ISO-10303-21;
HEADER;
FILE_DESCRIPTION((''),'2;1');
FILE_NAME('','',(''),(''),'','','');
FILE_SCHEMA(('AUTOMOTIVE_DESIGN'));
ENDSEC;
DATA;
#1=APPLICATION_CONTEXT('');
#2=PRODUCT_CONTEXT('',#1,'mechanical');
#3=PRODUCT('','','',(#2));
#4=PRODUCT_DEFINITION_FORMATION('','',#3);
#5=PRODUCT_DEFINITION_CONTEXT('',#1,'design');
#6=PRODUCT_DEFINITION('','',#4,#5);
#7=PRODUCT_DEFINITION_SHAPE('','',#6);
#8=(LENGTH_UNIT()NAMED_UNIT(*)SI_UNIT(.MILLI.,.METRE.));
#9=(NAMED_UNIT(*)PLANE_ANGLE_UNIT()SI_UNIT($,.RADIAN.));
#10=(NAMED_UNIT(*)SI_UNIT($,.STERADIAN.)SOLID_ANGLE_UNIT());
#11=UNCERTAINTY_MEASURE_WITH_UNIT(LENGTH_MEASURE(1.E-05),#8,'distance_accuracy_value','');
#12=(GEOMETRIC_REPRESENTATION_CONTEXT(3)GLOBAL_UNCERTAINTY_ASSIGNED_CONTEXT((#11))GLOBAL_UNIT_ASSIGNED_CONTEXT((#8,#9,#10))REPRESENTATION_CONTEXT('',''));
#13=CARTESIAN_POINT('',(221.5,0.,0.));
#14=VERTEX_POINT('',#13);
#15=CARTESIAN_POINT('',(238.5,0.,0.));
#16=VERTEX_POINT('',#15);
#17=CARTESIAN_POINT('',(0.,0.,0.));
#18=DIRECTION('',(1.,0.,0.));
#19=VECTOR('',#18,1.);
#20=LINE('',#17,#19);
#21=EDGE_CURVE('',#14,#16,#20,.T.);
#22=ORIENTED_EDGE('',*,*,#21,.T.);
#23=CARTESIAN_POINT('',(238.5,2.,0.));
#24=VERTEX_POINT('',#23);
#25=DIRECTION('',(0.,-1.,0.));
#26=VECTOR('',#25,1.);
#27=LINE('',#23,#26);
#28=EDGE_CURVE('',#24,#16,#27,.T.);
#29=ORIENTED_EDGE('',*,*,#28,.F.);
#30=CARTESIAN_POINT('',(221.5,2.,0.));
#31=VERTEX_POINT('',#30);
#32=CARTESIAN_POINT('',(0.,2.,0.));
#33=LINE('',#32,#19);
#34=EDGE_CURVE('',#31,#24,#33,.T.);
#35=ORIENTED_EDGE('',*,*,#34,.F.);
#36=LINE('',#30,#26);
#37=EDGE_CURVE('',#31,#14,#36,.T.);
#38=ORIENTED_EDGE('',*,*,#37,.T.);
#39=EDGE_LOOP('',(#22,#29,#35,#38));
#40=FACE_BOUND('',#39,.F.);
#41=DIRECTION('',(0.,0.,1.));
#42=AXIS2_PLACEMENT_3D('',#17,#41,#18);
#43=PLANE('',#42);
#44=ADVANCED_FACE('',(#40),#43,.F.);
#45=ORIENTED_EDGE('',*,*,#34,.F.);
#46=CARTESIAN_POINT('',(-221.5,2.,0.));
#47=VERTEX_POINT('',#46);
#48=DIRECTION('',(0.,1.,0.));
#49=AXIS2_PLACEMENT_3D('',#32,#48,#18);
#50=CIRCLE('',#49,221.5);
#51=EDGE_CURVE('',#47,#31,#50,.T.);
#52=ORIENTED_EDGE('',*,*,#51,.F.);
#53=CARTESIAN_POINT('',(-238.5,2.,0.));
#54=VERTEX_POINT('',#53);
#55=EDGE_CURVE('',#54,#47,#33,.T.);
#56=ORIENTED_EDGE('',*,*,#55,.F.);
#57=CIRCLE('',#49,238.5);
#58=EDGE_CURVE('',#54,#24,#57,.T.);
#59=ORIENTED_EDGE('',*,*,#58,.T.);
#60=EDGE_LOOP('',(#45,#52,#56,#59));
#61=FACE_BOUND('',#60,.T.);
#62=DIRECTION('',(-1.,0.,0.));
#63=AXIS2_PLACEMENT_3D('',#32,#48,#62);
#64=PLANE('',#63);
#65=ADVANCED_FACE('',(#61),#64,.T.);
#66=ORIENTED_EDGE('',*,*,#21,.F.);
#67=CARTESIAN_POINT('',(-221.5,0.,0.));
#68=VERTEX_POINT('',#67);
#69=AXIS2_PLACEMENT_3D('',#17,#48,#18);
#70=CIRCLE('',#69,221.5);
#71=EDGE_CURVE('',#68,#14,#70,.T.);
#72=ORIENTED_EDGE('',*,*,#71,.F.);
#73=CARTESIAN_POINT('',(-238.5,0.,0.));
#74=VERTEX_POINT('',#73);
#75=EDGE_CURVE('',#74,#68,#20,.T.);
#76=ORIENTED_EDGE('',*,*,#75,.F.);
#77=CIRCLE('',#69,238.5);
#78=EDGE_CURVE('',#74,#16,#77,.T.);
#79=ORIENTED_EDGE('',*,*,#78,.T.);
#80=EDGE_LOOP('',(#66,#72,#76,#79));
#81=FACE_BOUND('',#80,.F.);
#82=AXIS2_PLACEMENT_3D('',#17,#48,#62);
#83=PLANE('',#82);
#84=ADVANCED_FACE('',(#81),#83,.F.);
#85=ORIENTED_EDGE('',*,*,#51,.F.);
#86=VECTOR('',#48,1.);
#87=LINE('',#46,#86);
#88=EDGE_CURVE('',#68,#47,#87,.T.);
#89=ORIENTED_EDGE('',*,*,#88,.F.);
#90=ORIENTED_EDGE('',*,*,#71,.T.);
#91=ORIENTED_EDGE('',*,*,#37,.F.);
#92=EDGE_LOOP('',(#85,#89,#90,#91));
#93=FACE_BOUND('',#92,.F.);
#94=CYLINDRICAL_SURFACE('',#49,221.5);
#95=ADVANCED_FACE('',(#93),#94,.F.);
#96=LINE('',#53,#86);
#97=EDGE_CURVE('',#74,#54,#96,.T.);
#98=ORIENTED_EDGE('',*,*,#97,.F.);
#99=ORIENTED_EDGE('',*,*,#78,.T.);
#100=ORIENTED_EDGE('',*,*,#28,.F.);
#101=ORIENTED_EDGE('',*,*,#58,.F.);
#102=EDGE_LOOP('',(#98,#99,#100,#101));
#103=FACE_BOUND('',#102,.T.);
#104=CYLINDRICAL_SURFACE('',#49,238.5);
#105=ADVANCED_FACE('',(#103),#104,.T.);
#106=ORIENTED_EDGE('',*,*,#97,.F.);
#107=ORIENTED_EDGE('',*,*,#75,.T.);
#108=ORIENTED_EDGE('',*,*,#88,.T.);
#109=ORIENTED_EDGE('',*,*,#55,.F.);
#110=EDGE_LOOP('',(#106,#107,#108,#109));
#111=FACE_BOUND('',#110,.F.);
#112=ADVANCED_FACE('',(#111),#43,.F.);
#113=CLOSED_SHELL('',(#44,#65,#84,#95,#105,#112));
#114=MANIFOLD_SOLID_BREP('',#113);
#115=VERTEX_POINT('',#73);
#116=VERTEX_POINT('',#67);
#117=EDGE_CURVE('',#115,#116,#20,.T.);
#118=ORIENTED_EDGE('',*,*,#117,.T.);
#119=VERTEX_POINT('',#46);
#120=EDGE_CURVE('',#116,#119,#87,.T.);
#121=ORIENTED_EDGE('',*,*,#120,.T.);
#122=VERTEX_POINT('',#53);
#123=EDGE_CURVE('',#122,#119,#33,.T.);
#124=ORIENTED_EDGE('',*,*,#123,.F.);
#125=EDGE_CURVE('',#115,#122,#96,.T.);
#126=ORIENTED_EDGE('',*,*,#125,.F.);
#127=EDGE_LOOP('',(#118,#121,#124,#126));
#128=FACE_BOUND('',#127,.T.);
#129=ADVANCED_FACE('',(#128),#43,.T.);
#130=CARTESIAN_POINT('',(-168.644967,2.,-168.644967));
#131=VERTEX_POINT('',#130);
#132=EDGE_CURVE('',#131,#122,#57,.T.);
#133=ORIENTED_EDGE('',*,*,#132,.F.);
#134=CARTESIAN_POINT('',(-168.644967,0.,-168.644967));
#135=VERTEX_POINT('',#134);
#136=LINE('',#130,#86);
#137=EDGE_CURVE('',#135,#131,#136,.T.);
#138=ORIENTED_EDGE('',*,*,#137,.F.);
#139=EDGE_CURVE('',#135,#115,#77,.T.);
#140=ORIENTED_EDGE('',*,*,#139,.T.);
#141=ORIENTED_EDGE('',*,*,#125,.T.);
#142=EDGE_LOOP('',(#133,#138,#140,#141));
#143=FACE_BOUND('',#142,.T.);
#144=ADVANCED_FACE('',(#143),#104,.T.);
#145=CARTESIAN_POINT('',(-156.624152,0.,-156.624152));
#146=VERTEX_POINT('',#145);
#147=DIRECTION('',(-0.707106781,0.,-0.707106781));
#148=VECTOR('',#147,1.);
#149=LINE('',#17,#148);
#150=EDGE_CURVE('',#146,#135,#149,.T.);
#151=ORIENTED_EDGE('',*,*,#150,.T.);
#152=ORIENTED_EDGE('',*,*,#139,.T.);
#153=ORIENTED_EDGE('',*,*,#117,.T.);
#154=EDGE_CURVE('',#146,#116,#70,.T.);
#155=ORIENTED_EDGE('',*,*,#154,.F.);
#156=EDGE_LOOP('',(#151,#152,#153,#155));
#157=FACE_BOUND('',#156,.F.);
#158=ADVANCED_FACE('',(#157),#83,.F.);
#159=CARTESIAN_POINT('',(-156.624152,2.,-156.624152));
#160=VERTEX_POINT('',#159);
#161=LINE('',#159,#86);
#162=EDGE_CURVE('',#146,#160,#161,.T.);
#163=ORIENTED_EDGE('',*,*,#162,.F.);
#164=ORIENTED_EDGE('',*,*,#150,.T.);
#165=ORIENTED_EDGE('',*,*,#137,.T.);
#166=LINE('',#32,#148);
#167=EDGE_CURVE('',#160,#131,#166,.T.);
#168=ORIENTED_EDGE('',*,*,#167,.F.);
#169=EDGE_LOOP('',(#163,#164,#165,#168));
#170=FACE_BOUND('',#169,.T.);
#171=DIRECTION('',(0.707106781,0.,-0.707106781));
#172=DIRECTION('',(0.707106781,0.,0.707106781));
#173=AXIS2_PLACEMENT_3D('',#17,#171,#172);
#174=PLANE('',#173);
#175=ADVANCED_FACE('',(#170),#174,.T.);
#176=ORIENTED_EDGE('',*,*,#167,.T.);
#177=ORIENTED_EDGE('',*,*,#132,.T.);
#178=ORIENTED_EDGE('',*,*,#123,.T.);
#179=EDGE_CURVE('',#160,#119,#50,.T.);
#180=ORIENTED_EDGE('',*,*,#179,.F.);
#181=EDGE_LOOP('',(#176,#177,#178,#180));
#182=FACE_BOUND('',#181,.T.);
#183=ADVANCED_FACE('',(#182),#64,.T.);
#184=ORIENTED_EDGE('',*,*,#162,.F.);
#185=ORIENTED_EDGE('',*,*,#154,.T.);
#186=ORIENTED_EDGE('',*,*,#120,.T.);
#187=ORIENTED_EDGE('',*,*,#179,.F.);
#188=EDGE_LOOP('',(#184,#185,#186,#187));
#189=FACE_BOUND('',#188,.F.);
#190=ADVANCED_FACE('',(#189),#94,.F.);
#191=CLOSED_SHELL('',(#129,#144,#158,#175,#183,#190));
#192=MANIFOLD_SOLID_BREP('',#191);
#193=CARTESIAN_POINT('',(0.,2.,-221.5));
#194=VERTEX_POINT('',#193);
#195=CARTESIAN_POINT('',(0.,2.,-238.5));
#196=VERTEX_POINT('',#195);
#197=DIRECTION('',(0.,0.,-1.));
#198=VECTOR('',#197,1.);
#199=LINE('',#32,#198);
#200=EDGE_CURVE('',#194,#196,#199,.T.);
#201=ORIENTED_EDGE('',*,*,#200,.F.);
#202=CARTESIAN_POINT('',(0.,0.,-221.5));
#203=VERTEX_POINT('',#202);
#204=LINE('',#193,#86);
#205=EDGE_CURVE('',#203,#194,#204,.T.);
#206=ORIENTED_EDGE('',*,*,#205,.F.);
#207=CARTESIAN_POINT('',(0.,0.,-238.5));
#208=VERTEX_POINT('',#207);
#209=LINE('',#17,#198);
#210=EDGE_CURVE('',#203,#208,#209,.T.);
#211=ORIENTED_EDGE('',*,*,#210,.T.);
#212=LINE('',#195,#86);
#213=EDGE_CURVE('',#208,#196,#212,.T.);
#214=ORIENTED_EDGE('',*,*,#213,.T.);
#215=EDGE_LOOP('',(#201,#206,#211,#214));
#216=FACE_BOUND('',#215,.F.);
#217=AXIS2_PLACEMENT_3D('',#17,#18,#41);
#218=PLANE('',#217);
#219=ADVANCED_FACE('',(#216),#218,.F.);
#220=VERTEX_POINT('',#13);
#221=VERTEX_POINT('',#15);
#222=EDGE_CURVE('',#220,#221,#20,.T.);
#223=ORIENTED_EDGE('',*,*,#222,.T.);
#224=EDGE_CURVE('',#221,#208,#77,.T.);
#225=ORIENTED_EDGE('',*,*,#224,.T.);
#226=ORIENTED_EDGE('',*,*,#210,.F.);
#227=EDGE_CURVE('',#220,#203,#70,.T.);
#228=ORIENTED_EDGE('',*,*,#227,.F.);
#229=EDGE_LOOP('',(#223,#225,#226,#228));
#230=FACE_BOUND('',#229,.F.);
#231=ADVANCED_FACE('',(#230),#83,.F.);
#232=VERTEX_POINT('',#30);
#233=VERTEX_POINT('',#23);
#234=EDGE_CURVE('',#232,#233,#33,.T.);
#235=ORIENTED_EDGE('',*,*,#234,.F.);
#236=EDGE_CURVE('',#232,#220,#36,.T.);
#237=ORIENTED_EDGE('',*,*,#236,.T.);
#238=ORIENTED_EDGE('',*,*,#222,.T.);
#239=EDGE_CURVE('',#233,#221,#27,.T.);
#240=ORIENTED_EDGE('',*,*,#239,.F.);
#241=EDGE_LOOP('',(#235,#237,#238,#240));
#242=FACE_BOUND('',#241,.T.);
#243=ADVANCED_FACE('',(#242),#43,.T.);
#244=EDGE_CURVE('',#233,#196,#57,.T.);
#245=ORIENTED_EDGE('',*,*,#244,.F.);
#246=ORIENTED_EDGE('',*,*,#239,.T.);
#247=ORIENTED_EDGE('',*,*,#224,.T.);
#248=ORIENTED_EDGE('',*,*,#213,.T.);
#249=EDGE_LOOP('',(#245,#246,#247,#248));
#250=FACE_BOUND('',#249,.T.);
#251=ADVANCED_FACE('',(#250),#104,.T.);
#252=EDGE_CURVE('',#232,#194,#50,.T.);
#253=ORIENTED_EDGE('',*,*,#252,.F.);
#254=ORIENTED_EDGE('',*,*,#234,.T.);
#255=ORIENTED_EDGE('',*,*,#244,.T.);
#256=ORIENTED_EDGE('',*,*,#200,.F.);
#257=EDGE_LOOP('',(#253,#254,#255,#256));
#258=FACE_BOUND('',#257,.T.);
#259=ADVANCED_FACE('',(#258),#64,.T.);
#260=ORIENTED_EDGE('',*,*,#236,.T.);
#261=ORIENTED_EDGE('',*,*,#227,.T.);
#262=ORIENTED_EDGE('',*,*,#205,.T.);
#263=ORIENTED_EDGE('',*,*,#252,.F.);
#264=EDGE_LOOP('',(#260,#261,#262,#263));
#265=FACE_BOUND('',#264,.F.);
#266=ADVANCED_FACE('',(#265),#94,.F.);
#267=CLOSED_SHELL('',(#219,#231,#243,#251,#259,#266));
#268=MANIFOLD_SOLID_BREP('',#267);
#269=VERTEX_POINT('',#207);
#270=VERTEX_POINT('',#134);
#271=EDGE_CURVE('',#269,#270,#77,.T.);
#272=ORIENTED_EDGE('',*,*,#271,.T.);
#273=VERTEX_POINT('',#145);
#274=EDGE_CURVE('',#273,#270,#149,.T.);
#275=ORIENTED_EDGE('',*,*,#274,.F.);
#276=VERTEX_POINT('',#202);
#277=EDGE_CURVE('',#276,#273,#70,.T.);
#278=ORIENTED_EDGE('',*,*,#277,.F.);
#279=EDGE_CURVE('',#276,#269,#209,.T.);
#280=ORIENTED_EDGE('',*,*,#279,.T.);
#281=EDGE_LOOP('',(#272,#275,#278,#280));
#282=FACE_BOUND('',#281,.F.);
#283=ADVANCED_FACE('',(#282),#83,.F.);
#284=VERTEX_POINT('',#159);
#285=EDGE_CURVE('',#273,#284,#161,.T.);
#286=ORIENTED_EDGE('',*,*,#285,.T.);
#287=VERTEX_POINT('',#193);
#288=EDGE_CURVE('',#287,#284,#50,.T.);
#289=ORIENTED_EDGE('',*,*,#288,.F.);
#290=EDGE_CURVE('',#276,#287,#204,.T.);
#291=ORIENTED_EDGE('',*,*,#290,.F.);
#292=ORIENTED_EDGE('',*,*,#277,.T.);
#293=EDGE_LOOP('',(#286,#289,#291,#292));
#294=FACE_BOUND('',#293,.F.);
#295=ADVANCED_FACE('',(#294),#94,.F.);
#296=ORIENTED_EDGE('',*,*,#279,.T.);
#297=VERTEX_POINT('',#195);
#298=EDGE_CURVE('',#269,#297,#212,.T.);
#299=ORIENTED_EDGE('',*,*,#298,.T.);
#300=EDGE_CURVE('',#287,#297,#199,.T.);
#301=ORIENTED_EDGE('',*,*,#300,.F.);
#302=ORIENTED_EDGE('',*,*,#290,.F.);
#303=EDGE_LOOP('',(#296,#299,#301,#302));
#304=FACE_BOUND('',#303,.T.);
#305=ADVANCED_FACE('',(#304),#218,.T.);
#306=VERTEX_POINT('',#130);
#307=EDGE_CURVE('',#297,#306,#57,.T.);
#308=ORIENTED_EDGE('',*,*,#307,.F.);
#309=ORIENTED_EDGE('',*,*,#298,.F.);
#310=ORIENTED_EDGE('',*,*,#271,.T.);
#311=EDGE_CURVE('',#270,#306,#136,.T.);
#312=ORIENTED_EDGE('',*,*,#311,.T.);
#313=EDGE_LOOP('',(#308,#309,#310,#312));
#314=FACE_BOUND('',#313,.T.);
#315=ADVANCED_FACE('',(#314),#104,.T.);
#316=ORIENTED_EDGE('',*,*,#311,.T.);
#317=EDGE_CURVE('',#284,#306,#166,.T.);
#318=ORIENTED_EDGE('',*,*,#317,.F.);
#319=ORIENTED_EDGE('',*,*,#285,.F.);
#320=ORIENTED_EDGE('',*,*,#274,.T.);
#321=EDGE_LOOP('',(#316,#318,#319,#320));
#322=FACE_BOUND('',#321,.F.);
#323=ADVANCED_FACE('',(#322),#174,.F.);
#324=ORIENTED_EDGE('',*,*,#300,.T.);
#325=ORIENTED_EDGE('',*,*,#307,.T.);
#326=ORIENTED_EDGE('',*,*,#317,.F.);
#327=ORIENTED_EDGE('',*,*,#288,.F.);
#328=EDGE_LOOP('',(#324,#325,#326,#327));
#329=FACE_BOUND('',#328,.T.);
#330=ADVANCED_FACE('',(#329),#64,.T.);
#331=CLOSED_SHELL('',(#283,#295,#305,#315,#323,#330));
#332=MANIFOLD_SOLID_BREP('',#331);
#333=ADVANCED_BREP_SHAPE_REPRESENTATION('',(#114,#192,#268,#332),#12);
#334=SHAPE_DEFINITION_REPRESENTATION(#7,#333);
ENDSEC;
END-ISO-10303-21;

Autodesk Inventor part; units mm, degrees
ref_plane "XZ Plane" through (0, 0, 0) normal (0, 1, 0) x (-1, 0, 0)
sketch "Sketch1" plane through (0, 0, 0) normal (0, 1, 0) x (-1, 0, 0)
  circle A0 centre (0, 0) radius 230
  circle A1 centre (0, 0) radius 215
  circle A2 centre (0, 0) radius 245
  dimension "d0" = 460
  dimension "d1" = 15
  dimension "d2" = 15
extrude "Extrusion1" add sketch "Sketch1" along normal blind 2 contours A0 | A2
ref_plane "Work Plane2" through (0, 0, 0) normal (0.7071068, 0, -0.7071068) x (0, 1, 0)
sketch "Sketch3" plane through (0, 2, 0) normal (0, 1, 0) x (1, 0, 0)
  circle A0 centre (0, 0) radius 245 projected
  circle A1 centre (0, 0) radius 215 projected
  circle A2 centre (0, 0) radius 226.5
  circle A3 centre (0, 0) radius 233.5
  circle A4 centre (0, 0) radius 230
  circle A5 centre (0, 0) radius 221.5
  circle A6 centre (0, 0) radius 238.5
  dimension "d10" = 7
  dimension "d11" = 3.5
  dimension "d12" = 15
  dimension "d13" = 15
  dimension "d14" = 5
  dimension "d15" = 5
extrude "Extrusion4" cut sketch "Sketch3" against normal up to surface (2 mm away) contours A0 | A5
split_face "Split10"
split body "Split11" result two bodies by plane through (0, 0, 0) normal (0, 0, 1) first body at (232.5133, 0.5, 7.1263)
split body "Split12" result two bodies by plane through (0, 0, 0) normal (1, 0, 0) bodies 3 first body at (6.9289, 0.5, -232.5308)
split body "Split13" result two bodies by plane through (0, 0, 0) normal (0.7071068, 0, -0.7071068) bodies 5 first body at (-159.5247, 0.5, -169.3236)
properties part number "Bottom Guiding Rail LC" material "PLA Plastic"
